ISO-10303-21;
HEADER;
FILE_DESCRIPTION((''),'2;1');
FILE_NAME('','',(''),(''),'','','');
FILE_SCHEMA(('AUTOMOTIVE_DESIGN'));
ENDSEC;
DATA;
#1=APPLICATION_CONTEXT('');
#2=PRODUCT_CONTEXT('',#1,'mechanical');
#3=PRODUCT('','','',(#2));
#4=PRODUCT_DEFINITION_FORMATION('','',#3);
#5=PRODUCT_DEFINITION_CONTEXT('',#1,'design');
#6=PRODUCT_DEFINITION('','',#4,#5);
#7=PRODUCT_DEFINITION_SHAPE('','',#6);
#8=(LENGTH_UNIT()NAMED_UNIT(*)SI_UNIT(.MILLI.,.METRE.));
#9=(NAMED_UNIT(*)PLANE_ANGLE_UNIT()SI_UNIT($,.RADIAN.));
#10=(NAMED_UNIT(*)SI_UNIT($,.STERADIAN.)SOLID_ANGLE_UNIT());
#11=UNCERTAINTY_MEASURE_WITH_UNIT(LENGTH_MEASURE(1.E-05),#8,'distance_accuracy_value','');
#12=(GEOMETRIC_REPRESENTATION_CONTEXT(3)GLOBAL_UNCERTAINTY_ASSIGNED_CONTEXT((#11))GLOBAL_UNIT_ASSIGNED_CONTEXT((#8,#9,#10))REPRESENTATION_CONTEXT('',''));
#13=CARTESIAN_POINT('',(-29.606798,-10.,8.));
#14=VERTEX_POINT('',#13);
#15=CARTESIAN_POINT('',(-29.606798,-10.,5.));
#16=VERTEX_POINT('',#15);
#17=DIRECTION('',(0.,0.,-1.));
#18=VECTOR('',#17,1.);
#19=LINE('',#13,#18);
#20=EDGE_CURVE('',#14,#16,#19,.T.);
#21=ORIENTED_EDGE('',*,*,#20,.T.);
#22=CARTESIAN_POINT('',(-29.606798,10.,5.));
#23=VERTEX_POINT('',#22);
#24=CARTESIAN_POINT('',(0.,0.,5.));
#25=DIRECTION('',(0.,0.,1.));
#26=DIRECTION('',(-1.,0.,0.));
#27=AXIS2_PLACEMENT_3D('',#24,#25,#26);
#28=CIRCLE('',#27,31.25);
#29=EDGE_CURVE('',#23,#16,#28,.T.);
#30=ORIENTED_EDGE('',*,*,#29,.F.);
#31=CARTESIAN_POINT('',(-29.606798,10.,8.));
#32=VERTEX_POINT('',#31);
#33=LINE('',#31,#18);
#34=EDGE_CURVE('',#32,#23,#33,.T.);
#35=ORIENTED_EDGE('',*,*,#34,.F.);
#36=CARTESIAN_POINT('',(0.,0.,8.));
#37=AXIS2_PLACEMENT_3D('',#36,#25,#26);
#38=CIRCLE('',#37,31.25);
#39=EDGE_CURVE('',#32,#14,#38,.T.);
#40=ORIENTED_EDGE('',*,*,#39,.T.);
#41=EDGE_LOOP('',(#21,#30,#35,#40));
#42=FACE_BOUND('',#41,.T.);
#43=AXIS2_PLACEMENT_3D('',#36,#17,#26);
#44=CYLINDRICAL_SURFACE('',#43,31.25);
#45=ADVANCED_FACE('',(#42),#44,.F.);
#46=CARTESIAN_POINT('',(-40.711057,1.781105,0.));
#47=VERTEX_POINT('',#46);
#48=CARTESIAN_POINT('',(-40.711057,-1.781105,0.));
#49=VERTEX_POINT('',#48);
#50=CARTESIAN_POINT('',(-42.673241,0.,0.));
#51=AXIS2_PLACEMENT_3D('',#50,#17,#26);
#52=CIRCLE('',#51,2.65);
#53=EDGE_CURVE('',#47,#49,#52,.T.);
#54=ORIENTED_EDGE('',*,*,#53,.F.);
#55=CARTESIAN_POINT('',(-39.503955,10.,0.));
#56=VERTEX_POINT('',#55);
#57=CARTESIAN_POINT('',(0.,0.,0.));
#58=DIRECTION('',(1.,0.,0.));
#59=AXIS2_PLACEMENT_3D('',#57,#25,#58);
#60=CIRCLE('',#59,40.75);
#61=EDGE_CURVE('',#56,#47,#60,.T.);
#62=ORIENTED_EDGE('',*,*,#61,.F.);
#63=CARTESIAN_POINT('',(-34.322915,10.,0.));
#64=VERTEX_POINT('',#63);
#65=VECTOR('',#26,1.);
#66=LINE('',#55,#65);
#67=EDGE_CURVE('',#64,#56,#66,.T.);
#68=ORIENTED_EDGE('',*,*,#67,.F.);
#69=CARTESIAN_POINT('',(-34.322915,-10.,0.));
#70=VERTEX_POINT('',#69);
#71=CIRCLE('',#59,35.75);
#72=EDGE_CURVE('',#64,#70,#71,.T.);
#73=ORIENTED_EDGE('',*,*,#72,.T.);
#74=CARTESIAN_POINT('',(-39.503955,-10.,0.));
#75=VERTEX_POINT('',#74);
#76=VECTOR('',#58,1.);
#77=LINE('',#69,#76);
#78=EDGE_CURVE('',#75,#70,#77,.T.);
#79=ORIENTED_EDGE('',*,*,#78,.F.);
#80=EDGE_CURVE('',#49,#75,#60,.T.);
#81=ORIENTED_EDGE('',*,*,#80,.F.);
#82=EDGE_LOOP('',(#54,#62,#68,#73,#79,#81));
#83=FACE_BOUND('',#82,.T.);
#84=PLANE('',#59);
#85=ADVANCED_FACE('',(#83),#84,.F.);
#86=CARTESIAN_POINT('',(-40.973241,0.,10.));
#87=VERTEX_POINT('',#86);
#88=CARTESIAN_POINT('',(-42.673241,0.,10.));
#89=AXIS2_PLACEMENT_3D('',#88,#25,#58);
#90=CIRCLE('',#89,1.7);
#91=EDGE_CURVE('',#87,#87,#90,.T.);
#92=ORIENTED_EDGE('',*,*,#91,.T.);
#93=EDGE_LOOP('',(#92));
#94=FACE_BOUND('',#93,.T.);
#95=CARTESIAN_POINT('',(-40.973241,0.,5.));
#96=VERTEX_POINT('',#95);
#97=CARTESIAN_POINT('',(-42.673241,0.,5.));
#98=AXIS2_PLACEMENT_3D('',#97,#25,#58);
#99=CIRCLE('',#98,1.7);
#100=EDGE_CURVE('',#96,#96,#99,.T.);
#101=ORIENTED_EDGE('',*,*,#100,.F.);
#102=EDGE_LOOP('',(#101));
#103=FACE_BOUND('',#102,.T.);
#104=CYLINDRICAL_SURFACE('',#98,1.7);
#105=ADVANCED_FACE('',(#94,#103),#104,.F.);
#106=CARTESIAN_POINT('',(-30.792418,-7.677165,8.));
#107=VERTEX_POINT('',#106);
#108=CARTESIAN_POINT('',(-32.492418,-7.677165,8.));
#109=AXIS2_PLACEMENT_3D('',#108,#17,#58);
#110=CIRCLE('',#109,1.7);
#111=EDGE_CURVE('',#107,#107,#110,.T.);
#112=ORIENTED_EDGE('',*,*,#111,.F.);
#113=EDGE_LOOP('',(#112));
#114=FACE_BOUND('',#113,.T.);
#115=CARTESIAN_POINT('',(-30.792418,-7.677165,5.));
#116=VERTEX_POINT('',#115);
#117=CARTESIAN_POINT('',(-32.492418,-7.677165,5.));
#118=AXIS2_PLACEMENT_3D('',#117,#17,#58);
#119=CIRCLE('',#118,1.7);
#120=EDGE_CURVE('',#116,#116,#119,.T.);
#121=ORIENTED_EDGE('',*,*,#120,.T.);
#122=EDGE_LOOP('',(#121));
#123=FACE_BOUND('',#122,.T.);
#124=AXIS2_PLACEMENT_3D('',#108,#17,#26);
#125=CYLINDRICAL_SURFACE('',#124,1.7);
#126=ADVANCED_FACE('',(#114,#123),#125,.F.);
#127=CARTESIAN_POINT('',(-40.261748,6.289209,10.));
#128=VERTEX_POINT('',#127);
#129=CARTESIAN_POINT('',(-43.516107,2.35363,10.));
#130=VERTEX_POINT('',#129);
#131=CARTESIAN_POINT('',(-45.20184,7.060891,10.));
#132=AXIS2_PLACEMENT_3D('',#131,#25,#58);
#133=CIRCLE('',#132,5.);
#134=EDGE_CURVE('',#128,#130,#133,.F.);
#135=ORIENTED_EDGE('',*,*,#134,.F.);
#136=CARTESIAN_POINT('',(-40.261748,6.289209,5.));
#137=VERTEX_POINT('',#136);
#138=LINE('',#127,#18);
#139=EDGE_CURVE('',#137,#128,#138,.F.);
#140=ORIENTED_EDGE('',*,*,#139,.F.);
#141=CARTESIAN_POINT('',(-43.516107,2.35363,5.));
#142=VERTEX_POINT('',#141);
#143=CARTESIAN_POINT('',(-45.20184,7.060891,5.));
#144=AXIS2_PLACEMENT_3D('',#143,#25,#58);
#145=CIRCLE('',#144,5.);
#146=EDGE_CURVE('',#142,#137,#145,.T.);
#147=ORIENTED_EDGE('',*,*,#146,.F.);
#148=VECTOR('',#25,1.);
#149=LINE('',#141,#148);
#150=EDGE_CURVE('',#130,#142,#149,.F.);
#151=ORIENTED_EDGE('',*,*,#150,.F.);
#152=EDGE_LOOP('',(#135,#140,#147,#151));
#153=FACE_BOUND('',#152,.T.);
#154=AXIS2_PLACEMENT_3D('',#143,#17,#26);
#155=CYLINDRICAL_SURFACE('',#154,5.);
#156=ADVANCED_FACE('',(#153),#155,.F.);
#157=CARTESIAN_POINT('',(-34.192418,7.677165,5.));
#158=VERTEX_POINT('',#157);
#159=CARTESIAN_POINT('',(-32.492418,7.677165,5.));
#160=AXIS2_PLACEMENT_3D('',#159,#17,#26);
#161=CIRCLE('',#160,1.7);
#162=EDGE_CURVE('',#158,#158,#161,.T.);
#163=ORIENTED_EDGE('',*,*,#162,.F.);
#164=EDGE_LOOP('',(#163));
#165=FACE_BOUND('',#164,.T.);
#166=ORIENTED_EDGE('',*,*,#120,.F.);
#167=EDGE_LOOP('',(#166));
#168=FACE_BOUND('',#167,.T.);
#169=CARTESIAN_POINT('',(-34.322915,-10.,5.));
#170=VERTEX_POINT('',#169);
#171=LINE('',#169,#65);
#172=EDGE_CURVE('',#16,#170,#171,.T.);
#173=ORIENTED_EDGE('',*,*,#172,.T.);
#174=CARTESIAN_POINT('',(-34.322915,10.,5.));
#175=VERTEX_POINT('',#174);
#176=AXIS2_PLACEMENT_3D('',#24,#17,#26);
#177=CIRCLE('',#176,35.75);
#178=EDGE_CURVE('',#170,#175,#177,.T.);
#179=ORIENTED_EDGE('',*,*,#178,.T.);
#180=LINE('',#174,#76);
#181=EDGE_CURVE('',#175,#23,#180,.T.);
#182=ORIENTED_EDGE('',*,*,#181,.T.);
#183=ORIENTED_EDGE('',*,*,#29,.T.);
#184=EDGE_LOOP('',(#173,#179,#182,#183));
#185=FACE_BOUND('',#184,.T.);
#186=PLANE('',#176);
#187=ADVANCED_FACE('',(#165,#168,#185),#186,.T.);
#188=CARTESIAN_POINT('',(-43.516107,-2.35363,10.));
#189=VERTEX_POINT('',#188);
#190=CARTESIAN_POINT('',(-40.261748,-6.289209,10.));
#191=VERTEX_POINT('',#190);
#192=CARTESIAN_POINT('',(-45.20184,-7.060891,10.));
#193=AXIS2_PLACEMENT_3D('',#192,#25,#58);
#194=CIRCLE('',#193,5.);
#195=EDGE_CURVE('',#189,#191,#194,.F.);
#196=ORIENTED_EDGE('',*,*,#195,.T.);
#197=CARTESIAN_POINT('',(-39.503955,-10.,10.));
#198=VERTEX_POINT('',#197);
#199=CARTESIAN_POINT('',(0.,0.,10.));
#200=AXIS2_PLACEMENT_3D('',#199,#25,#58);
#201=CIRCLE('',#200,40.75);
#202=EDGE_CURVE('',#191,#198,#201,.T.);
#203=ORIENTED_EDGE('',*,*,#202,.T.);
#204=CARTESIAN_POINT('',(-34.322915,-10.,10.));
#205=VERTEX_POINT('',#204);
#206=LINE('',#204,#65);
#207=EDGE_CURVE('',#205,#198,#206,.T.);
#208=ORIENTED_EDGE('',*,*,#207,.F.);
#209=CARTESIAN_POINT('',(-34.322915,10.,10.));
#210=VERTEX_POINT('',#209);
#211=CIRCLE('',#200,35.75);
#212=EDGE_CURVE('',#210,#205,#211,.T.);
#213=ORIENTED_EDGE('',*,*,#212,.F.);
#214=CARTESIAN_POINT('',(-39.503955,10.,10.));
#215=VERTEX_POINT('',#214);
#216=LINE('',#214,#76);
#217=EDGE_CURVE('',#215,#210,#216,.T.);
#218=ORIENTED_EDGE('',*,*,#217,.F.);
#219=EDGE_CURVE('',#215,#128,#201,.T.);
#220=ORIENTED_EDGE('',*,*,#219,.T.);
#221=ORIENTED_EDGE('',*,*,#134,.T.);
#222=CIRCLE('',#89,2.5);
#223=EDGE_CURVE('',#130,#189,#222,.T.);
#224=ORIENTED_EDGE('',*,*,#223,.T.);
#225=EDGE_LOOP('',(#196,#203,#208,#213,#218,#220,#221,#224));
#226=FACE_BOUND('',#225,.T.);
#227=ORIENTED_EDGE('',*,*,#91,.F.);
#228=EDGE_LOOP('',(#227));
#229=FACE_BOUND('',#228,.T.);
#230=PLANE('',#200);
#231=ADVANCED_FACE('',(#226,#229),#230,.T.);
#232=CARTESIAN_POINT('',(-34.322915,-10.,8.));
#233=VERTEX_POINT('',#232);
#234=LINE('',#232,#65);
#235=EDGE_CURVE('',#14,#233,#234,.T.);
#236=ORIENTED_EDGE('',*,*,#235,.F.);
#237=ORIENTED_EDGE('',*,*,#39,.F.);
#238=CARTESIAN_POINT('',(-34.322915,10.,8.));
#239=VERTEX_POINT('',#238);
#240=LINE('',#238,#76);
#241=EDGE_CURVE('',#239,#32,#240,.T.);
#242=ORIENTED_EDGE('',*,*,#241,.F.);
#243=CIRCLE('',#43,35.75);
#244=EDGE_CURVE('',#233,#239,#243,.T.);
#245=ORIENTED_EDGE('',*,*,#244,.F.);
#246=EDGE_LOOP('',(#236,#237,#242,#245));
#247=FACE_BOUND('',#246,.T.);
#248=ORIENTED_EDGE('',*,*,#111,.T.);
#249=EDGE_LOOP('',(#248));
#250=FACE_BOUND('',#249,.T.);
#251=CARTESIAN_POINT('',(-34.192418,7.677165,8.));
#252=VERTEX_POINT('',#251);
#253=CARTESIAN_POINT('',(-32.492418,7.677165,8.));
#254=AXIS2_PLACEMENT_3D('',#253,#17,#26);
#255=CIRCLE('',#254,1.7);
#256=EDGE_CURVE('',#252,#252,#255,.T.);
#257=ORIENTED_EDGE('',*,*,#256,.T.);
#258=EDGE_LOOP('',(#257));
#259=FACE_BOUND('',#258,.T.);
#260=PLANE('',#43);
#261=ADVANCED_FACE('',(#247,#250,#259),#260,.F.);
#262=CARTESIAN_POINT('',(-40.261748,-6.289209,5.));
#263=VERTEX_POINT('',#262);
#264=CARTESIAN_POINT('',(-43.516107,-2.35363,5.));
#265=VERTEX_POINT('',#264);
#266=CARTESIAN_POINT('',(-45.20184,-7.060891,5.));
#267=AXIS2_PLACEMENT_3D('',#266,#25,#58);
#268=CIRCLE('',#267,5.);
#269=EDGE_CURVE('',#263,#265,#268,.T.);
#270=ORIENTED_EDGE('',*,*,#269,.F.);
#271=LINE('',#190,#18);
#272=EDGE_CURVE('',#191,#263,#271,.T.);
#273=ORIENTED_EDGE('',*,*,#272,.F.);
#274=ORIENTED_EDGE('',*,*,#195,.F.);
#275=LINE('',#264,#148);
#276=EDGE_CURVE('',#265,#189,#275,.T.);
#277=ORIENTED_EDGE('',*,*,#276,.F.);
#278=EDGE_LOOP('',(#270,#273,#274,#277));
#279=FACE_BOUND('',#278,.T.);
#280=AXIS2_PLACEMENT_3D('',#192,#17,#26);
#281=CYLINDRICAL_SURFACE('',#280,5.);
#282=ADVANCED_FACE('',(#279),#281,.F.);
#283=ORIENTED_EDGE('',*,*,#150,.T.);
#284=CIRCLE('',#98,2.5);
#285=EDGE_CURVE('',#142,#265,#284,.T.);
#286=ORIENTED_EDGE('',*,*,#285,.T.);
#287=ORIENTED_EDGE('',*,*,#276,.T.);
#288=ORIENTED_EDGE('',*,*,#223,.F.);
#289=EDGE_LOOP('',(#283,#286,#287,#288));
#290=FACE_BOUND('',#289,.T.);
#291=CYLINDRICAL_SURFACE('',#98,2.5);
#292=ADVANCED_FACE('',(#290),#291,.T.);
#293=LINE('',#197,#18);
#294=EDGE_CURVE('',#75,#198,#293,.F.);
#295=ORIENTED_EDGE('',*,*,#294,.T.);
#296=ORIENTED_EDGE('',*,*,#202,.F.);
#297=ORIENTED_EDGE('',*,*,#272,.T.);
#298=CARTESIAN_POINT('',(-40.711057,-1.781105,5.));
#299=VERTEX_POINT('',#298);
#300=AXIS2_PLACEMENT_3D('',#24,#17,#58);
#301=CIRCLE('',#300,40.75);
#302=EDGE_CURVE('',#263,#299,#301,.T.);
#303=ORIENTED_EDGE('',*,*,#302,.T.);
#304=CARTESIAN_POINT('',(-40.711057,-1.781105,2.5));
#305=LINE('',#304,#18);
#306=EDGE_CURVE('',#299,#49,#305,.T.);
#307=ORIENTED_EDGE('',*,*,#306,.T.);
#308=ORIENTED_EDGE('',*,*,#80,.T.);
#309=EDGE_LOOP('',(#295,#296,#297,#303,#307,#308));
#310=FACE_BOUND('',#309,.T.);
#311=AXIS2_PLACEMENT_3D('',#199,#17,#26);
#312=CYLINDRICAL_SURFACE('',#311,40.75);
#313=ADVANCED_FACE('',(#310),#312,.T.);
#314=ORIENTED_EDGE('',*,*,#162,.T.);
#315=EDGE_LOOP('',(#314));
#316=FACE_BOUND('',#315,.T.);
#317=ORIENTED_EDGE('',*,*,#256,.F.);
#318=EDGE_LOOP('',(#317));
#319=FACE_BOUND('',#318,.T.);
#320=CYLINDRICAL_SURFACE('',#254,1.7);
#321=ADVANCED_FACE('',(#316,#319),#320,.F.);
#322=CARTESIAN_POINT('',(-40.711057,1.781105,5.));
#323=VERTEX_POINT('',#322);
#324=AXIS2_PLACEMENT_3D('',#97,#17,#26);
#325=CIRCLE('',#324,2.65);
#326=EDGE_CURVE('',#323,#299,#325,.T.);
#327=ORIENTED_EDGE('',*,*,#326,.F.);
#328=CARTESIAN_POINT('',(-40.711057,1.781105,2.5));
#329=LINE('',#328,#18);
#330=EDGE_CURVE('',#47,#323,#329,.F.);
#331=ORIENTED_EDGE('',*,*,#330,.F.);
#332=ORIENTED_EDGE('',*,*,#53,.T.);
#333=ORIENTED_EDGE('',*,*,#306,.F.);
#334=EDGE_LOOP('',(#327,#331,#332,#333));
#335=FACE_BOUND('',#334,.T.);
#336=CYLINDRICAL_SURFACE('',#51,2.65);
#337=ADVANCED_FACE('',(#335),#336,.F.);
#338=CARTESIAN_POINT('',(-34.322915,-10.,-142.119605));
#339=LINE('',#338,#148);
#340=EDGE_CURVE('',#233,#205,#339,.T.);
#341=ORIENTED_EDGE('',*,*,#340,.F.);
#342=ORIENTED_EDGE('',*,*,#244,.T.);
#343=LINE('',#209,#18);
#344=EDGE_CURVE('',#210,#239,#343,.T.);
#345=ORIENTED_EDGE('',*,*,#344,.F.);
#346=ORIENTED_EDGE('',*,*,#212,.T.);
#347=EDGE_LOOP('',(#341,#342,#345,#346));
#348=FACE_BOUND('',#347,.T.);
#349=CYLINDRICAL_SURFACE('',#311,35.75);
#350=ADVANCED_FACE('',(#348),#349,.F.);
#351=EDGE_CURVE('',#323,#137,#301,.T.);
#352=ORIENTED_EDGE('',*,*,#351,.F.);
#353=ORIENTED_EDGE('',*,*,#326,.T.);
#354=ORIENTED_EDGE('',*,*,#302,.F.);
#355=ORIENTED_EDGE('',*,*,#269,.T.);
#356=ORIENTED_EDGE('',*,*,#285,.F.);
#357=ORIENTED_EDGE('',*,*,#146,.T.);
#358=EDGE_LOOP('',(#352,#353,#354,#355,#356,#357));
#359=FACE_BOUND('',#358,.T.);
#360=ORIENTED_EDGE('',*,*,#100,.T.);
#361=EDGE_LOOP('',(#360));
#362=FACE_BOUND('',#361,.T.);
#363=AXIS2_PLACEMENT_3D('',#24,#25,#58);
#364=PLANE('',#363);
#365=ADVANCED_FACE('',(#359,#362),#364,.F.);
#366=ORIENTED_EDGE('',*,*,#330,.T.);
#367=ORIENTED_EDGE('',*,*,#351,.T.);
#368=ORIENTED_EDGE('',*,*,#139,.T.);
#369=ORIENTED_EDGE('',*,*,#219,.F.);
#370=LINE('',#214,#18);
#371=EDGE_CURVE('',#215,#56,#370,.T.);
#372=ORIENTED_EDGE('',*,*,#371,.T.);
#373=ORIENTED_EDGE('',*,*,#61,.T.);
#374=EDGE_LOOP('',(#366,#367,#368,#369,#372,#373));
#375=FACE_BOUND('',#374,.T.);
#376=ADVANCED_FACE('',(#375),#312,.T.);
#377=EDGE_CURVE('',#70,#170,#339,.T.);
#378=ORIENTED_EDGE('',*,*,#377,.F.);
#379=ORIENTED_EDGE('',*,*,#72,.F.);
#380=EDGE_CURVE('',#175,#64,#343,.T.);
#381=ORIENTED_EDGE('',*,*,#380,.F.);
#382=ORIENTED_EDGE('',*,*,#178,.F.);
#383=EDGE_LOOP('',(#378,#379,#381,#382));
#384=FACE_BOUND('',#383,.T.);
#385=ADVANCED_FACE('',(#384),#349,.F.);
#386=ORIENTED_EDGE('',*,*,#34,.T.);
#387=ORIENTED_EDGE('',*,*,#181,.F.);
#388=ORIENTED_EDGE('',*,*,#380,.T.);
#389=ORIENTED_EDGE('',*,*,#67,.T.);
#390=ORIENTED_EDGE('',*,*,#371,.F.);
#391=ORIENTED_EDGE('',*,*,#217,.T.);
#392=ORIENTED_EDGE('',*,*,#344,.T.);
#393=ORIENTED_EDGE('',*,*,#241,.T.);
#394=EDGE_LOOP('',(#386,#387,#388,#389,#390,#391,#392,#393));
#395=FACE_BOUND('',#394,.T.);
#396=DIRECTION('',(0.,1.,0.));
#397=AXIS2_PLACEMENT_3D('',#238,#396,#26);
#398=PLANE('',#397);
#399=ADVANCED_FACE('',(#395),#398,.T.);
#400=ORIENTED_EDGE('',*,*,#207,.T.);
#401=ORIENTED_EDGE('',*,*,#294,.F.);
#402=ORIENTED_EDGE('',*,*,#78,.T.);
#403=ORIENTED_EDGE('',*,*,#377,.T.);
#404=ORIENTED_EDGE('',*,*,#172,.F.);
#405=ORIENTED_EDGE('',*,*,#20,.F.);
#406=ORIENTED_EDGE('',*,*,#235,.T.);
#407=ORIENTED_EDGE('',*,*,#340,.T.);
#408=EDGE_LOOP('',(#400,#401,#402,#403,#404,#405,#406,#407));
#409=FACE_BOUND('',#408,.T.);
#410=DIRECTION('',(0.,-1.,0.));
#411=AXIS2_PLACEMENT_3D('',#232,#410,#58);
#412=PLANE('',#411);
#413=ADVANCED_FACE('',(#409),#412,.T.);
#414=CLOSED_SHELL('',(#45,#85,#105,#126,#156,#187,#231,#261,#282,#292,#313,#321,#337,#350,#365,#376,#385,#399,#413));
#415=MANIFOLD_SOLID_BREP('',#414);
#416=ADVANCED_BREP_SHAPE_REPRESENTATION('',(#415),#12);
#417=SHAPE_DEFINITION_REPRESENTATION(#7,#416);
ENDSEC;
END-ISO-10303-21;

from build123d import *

# Parameters (mm, degrees)
CROQUIS1_R                       = 40.75
CROQUIS1_R_2                     = 35.75
SALIENTE_EXTRUIR1_DEPTH          = 10
CROQUIS2_R                       = 1.7
SALIENTE_EXTRUIR2_DEPTH          = 3
SALIENTE_EXTRUIR3_START          = -5
CROQUIS3_R                       = 1.7
SALIENTE_EXTRUIR3_DEPTH          = 5
CORTAR_EXTRUIR1_DEPTH            = 10
REDONDEO1_R                      = 5
TALADRO_DE_MARGEN_PARA_M51_DEPTH = 5


# Read off the part's stored shape, not the designer's step: Taladro de margen para M51
with BuildPart() as part:
    # Croquis1 → Saliente-Extruir1 (new body)
    with BuildSketch(Plane.XY):
        Circle(CROQUIS1_R)
        Circle(CROQUIS1_R_2, mode=Mode.SUBTRACT)
    extrude(amount=SALIENTE_EXTRUIR1_DEPTH)

    # Croquis2 → Saliente-Extruir2 (add)
    with BuildSketch(Plane(origin=(0, 0, 5), x_dir=(-1, 0, 0), z_dir=(0, 0, -1))):
        with BuildLine():
            Line((34.322915086, -10), (29.606798206, -10))
            ThreePointArc((29.606798206, -10), (31.25, 0), (29.606798206, 10))
            Line((29.606798206, 10), (34.322915086, 10))
            ThreePointArc((34.322915086, 10), (35.75, 0), (34.322915086, -10))
        make_face()
        with Locations((32.492418426, 7.677165354)):
            Circle(CROQUIS2_R, mode=Mode.SUBTRACT)
        with Locations(Location((32.492418426, -7.677165354, 0), (0, 0, 180))):
            Circle(CROQUIS2_R, mode=Mode.SUBTRACT)
    extrude(amount=-SALIENTE_EXTRUIR2_DEPTH)

    # Croquis3 → Saliente-Extruir3 (add)
    with BuildSketch(Plane.XY.offset(10).offset(SALIENTE_EXTRUIR3_START)):
        with BuildLine():
            Line((-40.673240589, -2.5), (-42.673240589, -2.5))
            ThreePointArc((-42.673240589, -2.5), (-45.173240589, 0), (-42.673240589, 2.5))
            Line((-42.673240589, 2.5), (-40.673240589, 2.5))
            ThreePointArc((-40.673240589, 2.5), (-40.75, 0), (-40.673240589, -2.5))
        make_face()
        with Locations((-42.673240589, 0)):
            Circle(CROQUIS3_R, mode=Mode.SUBTRACT)
    extrude(amount=SALIENTE_EXTRUIR3_DEPTH)

    # Croquis4 → Cortar-Extruir1 (cut)
    with BuildSketch(Plane.XY.offset(10)):
        Polygon((-34.322915086, -10), (-63.814245497, -10), (-63.814245497, -44.810382184), (45.541144723, -44.810382184), (45.541144723, 45.96065319), (-49.780136639, 45.96065319), (-49.780136639, 10), (-39.503955498, 10), (-24.875936239, 10), (-24.875936239, -15.19237414), align=None)
    extrude(amount=-CORTAR_EXTRUIR1_DEPTH, mode=Mode.SUBTRACT)

    # Redondeo1
    # the kernel refuses this fillet: 5 mm, written as the material it adds along each edge
    with BuildSketch(Plane(origin=(-40.673240589, -2.5, 5), x_dir=(0.10796118489430687, -0.9941551099080149, 0), z_dir=(0, 0, 1))) as redondeo1_piece_1:
        with BuildLine():
            CenterArc((4.0453205, -4.994529194), REDONDEO1_R, 92.68051287, 61.418565497)
            Line((-0.452433263, -2.810447903), (-0.902208639, -2.592039774))
            ThreePointArc((-0.902208639, -2.592039774), (-0.712999925, -1.934329627), (-0.497077555, 0.053980592))
            Line((-0.497077555, 0.053980592), (0.023383355, 0.499452919))
            ThreePointArc((0.023383355, 0.499452919), (1.905743473, 0.45541293), (3.78810359, 0.499452919))
            Line((3.78810359, 0.499452919), (3.811486945, 0))
        make_face()
    extrude(amount=5)
    with BuildSketch(Plane(origin=(-40.673240589, 2.5, 5), x_dir=(0.1079611848943066, 0.994155109908015, 0), z_dir=(0, 0, 1))) as redondeo1_piece_2:
        with BuildLine():
            CenterArc((4.0453205, 4.994529194), REDONDEO1_R, 205.900921633, 61.418565497)
            Line((-0.452433263, 2.810447903), (-0.902208639, 2.592039774))
            ThreePointArc((-0.902208639, 2.592039774), (-0.712999925, 1.934329627), (-0.497077555, -0.053980592))
            Line((-0.497077555, -0.053980592), (0.023383355, -0.499452919))
            ThreePointArc((0.023383355, -0.499452919), (1.905743473, -0.45541293), (3.78810359, -0.499452919))
            Line((3.78810359, -0.499452919), (3.811486945, 0))
        make_face()
    extrude(amount=5)

    # Taladro de margen para M51 outline → Taladro de margen para M51 (cut)
    with BuildSketch(Plane.XY):
        with BuildLine():
            ThreePointArc((-40.711057028, -1.781105183), (-40.023240589, 0), (-40.711057028, 1.781105183))
            ThreePointArc((-40.711057028, 1.781105183), (-40.75, 0), (-40.711057028, -1.781105183))
        make_face()
    extrude(amount=TALADRO_DE_MARGEN_PARA_M51_DEPTH, mode=Mode.SUBTRACT)


solid = part.part
